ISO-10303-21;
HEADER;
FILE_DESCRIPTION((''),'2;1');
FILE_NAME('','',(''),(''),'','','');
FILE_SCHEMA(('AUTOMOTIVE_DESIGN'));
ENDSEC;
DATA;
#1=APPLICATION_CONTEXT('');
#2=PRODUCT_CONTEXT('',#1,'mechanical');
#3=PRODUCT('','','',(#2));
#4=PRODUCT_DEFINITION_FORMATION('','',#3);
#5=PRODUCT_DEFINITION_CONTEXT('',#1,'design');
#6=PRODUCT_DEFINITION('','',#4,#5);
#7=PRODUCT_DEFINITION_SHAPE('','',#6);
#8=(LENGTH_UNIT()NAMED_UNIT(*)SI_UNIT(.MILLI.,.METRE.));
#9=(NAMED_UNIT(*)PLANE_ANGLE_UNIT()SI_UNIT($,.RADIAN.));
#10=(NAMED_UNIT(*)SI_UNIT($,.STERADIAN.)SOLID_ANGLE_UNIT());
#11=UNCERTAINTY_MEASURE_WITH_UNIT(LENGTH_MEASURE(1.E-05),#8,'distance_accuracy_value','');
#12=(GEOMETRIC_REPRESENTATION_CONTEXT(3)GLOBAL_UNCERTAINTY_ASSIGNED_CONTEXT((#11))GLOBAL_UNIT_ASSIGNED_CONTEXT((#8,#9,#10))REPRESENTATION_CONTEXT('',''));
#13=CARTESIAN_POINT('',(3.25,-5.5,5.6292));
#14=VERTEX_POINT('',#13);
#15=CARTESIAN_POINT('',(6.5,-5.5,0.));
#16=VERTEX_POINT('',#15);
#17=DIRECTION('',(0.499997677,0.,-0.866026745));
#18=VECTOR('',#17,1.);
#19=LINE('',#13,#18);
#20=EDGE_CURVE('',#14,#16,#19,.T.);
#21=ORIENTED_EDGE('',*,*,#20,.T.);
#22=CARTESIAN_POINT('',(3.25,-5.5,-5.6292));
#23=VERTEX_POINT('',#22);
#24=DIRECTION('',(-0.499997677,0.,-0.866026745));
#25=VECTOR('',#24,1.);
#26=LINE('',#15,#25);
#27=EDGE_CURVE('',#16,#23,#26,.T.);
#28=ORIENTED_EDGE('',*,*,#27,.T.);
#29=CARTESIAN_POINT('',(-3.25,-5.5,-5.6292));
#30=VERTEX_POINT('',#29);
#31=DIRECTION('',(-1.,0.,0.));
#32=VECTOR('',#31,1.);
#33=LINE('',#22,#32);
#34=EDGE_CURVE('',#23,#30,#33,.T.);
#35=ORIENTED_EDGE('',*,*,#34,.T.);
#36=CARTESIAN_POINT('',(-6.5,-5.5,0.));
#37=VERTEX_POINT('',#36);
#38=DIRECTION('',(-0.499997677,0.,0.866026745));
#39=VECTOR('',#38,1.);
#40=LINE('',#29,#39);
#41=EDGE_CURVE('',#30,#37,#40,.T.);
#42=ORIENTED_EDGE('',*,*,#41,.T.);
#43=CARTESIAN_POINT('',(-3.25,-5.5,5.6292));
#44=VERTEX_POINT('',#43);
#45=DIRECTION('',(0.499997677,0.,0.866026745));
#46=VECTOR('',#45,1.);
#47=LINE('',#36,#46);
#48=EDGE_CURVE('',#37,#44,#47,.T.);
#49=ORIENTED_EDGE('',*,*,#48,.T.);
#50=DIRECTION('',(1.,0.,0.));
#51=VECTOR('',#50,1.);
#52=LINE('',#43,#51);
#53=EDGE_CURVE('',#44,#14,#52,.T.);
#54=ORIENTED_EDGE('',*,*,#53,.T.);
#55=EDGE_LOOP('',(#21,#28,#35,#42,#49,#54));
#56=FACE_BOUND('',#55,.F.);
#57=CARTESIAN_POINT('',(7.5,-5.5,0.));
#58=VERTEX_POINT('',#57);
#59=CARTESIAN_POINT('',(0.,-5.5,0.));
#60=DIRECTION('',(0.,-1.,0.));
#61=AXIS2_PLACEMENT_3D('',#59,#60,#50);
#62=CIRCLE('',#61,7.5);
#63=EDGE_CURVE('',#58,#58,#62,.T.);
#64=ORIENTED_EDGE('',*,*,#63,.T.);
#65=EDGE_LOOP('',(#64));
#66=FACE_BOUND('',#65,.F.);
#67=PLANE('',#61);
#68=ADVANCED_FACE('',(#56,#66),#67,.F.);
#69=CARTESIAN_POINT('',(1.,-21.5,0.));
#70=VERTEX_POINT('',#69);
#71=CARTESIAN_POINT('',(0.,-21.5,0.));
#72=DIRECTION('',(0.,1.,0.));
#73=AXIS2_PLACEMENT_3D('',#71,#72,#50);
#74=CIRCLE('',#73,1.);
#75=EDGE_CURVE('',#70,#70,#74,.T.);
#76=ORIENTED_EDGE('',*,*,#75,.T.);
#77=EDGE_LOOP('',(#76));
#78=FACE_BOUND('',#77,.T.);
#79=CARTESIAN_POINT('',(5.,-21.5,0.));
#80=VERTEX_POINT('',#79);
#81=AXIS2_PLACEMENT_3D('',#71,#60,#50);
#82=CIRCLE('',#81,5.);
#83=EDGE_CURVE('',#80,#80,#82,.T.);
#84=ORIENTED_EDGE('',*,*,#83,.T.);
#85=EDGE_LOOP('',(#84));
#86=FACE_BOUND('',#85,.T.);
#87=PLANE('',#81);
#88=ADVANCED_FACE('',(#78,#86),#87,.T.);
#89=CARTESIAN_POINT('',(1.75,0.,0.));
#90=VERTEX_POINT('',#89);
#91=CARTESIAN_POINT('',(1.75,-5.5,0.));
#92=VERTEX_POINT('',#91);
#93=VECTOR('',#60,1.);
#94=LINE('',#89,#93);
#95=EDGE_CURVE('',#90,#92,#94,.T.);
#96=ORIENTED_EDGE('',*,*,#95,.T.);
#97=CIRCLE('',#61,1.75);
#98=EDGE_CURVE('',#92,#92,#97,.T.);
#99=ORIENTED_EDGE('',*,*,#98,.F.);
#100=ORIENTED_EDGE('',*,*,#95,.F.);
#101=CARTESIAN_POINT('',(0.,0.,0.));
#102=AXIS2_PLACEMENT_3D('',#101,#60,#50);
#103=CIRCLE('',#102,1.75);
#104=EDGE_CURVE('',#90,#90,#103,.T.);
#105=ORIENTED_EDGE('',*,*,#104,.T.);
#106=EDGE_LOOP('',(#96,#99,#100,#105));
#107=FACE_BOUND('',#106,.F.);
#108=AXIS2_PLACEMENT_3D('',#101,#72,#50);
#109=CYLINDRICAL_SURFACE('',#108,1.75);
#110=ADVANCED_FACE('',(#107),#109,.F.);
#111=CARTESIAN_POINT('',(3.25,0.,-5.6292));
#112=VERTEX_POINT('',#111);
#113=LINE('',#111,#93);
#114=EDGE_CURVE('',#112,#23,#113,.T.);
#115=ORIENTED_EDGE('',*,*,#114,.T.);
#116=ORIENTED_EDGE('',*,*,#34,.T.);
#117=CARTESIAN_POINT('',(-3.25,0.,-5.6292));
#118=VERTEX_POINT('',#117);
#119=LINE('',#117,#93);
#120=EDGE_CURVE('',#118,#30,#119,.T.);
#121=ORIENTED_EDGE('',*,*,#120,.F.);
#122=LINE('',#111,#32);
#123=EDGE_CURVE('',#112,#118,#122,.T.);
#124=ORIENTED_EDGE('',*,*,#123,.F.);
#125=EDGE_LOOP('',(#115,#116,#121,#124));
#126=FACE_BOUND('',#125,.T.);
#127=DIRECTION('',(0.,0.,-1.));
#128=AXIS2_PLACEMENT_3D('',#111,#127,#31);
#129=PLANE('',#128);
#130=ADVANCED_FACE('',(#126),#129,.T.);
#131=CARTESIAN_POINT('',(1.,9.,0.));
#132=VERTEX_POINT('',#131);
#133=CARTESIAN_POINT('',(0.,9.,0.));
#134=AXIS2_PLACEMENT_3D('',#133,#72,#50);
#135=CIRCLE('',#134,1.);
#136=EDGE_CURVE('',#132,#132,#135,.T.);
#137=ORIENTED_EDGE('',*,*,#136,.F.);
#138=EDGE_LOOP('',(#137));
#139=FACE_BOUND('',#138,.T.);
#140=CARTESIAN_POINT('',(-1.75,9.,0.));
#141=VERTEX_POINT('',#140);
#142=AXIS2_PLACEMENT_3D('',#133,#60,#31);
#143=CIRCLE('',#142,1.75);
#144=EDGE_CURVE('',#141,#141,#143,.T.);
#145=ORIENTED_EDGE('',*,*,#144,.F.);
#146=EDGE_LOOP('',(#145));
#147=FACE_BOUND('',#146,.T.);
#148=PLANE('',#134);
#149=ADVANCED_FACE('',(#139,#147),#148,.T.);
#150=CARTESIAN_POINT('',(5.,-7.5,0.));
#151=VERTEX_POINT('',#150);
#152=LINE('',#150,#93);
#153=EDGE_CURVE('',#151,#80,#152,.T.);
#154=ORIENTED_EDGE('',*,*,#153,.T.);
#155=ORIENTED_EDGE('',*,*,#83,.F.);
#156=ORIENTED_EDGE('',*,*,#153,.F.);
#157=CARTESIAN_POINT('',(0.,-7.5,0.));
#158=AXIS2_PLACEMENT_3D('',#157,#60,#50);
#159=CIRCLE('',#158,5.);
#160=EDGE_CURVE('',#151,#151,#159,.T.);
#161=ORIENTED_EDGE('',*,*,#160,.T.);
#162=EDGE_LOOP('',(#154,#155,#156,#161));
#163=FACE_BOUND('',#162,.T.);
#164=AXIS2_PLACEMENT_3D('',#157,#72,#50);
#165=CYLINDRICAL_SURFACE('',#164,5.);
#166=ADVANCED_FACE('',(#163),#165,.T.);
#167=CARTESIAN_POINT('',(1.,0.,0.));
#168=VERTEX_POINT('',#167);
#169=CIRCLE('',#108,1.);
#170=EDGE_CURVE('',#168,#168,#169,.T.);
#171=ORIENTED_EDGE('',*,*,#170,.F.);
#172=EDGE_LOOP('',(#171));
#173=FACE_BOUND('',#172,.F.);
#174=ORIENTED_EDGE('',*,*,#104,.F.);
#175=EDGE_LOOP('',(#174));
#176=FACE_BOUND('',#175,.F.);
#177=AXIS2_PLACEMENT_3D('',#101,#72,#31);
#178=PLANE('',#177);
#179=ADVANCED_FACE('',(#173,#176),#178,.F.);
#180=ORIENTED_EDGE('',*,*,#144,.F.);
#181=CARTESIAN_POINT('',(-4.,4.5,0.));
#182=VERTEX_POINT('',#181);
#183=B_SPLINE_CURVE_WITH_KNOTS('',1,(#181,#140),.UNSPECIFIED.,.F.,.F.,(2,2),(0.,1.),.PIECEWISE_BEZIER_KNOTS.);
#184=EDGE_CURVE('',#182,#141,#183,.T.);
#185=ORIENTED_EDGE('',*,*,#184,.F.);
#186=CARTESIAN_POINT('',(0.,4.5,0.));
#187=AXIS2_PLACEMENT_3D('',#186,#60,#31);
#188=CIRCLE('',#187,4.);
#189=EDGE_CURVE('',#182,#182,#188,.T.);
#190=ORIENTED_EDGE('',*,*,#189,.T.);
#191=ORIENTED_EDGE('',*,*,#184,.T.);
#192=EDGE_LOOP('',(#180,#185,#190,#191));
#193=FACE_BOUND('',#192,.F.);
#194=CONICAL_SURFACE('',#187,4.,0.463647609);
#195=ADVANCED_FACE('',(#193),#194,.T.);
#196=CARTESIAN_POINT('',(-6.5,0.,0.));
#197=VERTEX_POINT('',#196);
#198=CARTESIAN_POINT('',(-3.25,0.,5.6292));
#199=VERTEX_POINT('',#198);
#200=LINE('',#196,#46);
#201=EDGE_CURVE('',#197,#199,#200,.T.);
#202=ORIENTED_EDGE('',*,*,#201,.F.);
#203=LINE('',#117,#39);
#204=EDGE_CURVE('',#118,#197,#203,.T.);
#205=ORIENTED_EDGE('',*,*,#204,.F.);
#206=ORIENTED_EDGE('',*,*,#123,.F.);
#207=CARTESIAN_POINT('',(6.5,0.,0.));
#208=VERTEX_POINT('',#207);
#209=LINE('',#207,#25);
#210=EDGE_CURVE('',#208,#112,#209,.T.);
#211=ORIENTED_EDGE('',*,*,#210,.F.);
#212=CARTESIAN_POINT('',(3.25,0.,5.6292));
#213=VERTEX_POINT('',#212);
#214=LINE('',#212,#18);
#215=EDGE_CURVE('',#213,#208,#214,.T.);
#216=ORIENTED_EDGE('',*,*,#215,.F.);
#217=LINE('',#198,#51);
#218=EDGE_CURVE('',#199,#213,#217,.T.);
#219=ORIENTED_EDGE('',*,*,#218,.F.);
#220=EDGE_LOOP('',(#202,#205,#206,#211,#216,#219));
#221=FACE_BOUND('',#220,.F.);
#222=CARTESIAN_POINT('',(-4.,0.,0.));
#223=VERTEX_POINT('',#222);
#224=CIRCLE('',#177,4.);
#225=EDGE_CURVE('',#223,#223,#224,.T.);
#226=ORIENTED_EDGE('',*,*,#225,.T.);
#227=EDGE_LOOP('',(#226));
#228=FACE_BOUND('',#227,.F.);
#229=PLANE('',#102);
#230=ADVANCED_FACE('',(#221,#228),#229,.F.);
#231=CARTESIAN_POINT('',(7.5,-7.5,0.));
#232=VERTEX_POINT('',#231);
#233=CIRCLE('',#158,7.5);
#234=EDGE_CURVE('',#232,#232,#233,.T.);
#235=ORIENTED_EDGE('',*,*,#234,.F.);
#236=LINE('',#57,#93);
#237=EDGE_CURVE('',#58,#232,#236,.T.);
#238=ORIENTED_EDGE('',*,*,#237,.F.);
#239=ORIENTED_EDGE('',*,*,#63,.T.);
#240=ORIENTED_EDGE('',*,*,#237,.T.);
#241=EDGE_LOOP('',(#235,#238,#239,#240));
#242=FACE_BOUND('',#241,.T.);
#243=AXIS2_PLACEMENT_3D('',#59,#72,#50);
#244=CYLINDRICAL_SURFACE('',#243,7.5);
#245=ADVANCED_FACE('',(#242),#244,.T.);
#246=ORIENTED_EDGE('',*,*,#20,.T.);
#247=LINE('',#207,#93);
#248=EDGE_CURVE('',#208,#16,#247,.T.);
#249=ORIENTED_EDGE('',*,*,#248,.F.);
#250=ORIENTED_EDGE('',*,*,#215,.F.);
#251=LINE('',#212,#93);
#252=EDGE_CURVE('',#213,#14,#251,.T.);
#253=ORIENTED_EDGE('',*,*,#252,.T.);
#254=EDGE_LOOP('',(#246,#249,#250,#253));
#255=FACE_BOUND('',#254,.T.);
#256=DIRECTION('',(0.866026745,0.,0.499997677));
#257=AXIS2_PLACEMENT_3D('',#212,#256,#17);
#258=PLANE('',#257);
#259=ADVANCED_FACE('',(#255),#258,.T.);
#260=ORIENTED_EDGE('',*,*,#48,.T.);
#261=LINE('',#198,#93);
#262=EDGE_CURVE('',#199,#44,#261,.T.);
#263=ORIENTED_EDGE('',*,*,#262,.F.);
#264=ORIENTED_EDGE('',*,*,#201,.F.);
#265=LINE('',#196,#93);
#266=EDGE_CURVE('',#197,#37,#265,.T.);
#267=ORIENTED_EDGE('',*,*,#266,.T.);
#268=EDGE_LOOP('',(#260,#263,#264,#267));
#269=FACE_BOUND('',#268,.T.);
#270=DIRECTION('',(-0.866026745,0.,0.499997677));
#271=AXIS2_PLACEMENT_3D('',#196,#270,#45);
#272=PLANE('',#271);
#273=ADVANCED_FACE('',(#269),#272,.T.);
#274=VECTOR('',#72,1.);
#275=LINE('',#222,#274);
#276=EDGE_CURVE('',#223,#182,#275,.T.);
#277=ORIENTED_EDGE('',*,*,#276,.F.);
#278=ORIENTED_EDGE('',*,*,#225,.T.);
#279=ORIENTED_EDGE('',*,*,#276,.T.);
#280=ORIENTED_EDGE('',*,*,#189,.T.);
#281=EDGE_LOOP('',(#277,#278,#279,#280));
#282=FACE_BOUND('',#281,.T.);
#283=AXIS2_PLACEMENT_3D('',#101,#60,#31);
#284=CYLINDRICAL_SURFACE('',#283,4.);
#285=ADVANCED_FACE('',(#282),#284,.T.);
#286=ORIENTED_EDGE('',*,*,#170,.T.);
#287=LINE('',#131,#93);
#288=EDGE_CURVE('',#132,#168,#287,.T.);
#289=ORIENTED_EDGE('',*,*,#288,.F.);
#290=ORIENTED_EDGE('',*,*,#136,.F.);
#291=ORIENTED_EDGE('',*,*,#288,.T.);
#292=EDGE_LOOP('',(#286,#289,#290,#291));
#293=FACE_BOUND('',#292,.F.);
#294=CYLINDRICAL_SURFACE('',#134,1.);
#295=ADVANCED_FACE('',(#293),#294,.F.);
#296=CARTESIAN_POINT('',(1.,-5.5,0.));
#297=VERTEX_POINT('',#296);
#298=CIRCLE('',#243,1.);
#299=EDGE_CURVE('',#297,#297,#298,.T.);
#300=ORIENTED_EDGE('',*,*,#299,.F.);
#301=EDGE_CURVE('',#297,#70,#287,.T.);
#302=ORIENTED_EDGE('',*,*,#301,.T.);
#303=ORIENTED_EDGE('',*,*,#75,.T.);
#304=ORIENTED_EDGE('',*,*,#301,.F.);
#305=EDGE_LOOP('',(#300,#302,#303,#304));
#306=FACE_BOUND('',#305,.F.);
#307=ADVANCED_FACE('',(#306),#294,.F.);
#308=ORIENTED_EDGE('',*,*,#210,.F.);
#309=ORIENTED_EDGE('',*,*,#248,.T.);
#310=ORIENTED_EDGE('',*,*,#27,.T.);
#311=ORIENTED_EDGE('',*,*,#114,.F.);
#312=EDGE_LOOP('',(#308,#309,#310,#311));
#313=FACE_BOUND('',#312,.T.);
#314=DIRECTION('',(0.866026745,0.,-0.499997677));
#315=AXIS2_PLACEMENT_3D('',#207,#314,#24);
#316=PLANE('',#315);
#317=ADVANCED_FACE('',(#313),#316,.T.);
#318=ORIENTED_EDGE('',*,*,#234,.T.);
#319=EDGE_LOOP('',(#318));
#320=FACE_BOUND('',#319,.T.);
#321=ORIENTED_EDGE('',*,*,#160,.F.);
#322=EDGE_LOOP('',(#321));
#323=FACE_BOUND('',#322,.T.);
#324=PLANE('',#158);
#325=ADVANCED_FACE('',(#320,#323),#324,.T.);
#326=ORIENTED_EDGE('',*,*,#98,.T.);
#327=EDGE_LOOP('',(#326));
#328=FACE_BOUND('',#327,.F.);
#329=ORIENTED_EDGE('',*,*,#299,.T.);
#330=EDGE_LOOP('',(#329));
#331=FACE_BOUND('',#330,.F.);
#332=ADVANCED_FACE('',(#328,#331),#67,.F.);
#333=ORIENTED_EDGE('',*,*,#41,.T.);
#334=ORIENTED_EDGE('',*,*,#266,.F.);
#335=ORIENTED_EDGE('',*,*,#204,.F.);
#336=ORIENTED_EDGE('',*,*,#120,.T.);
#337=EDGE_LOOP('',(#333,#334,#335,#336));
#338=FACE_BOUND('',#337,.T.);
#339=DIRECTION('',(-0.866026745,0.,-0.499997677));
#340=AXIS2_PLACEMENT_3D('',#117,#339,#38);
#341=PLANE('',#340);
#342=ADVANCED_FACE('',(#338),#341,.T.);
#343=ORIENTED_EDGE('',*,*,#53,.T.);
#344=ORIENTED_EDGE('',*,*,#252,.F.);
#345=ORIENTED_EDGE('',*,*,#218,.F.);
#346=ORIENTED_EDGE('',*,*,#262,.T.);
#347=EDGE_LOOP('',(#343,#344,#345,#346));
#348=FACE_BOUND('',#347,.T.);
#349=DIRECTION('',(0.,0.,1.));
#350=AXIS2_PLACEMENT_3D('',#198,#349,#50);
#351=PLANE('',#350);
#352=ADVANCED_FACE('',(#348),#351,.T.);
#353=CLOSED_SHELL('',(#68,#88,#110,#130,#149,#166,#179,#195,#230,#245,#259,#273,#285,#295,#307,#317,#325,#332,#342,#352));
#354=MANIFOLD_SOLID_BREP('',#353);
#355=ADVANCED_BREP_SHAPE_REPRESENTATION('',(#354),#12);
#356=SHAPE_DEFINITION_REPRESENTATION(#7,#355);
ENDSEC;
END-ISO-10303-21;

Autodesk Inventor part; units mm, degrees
ref_plane "YZ Plane" through (0, 0, 0) normal (1, 0, 0) x (0, 1, 0)
ref_plane "XZ Plane" through (0, 0, 0) normal (0, 1, 0) x (-1, 0, 0)
sketch "Sketch1" plane through (0, 0, 0) normal (0, 1, 0) x (-1, 0, 0)
  circle A0 centre (0, 0) radius 4
  dimension "d0" = 8
extrude "Extrusion1" add sketch "Sketch1" along normal blind 4.5
ref_plane "Work Plane1" through (0, 9, 0) normal (0, 1, 0) x (1, 0, 0)
sketch "Sketch2" plane through (0, 9, 0) normal (0, 1, 0) x (1, 0, 0)
  circle A0 centre (0, 0) radius 1.75
  dimension "d4" = 3.5
loft "Loft1" add profiles "Sketch2" section 1 edges at (4, 4.5, 0)
sketch "Sketch3" plane through (0, 9, 0) normal (0, 1, 0) x (1, 0, 0)
  circle A0 centre (0, 0) radius 1
  dimension "d9" = 2
sketch "Sketch4" plane through (0, 0, 0) normal (0, -1, 0) x (1, 0, 0)
  circle A0 centre (0, 0) radius 1.75 projected
  line L0 (6.5, 0) -> (3.25, -5.6292)
  line L1 (3.25, -5.6292) -> (-3.25, -5.6292)
  line L2 (-3.25, -5.6292) -> (-6.5, 0)
  line L3 (-6.5, 0) -> (-3.25, 5.6292)
  line L4 (-3.25, 5.6292) -> (3.25, 5.6292)
  line L5 (3.25, 5.6292) -> (6.5, 0)
extrude "Extrusion2" add sketch "Sketch4" along normal blind 5.5
sketch "Sketch5" plane through (0, -5.5, 0) normal (0, -1, 0) x (1, 0, 0)
  circle A0 centre (0, 0) radius 7.5
  dimension "d12" = 15
extrude "Extrusion3" add sketch "Sketch5" along normal blind 2
sketch "Sketch6" plane through (0, -7.5, 0) normal (0, -1, 0) x (1, 0, 0)
  circle A0 centre (0, 0) radius 5
  dimension "d15" = 10
extrude "Extrusion4" add sketch "Sketch6" along normal blind 14
thread "Thread1" size "M10x1.5" class "6g" standard "ANSI Metric M Profile" full length
extrude "Extrusion5" cut sketch "Sketch3" against normal up to surface (30.5 mm away)
properties part number "ZKE-Term-Sprung-17.5mm"
